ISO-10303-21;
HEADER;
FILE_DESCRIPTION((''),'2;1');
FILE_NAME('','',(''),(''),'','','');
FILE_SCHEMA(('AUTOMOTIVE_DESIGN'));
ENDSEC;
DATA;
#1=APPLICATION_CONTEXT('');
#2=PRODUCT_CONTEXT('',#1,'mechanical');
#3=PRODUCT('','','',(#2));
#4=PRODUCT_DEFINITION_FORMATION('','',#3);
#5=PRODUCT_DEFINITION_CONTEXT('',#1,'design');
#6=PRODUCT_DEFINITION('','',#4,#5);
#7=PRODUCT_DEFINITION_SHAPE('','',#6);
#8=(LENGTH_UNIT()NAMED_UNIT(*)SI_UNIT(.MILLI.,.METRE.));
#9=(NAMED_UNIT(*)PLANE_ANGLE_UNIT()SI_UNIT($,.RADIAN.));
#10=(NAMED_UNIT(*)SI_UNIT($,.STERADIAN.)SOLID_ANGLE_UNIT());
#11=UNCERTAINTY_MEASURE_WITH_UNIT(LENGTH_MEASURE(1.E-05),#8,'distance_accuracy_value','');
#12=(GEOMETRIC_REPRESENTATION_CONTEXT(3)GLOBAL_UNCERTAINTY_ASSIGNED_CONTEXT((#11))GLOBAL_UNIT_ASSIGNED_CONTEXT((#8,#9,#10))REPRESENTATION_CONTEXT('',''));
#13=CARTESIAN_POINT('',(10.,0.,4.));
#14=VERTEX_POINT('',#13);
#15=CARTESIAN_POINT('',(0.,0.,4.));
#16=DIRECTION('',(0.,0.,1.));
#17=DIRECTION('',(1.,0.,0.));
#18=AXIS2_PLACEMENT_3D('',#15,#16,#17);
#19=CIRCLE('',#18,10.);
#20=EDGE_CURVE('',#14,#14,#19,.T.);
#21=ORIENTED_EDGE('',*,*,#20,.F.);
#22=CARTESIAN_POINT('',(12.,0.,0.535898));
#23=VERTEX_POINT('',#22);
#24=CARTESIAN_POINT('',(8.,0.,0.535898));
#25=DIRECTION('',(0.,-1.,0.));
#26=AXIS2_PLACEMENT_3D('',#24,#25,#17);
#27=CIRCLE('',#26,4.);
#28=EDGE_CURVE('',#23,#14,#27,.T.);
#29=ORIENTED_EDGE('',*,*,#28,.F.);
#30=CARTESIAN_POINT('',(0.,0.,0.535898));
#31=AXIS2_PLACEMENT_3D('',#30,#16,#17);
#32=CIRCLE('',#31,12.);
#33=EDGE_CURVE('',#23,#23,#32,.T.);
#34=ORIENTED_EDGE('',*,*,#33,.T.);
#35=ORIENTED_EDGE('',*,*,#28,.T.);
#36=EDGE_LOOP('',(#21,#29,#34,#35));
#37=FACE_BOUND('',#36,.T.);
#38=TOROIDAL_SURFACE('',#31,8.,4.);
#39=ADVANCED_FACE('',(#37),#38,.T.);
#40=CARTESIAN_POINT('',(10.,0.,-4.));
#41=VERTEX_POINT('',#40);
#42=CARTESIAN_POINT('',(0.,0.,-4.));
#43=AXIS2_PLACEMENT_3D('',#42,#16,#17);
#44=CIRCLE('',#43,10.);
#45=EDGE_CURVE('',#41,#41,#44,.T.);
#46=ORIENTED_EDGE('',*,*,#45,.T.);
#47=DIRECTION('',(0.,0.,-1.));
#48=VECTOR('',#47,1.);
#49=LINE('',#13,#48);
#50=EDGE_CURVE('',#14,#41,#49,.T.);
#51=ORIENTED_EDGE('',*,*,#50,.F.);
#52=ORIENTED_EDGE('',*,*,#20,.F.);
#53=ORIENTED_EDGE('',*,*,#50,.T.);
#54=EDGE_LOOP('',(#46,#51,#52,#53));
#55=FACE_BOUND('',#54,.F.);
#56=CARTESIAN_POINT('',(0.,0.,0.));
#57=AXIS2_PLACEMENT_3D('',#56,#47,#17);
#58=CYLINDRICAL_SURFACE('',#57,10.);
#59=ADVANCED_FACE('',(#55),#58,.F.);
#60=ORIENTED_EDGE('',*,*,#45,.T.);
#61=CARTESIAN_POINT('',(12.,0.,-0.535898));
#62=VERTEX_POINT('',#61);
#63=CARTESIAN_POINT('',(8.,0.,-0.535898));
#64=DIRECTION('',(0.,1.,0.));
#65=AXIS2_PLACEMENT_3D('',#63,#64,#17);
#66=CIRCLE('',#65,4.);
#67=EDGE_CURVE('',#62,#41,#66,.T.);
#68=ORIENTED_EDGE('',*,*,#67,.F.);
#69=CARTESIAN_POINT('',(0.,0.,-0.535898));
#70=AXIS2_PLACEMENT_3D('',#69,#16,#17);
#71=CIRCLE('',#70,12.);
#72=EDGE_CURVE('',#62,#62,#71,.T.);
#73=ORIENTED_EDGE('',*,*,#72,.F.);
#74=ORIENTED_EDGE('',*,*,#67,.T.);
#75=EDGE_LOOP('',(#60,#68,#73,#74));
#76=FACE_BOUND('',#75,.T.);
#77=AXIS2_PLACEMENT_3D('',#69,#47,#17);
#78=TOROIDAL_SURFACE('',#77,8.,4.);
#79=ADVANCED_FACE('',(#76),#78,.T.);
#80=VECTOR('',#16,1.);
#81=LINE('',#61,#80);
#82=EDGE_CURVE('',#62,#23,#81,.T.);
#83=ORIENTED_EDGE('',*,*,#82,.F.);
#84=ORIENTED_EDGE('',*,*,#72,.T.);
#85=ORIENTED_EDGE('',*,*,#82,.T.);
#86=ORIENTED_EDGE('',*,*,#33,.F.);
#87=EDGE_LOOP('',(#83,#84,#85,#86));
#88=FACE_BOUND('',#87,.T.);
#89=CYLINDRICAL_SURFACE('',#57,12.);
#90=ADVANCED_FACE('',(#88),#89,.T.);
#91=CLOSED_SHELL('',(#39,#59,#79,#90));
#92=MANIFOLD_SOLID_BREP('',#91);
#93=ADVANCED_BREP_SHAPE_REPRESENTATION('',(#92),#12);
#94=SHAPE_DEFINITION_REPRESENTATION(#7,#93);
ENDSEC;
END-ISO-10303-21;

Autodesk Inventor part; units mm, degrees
ref_plane "YZ Plane" through (0, 0, 0) normal (1, 0, 0) x (0, 1, 0)
ref_plane "XZ Plane" through (0, 0, 0) normal (0, 1, 0) x (-1, 0, 0)
ref_plane "XY Plane" through (0, 0, 0) normal (0, 0, 1) x (1, 0, 0)
sketch "Эскиз1" plane through (0, 0, 0) normal (0, 0, 1) x (1, 0, 0)
  circle A0 centre (0, 0) radius 12
  circle A1 centre (0, 0) radius 10
  dimension "d0" = 24
  dimension "d1" = 20
extrude "Выдавливание1" add sketch "Эскиз1" along normal mid plane 8
fillet "Сопряжение1" radius 4 2 edges at (-12, 0, 4) (-12, 0, -4)
properties part number "шина"
